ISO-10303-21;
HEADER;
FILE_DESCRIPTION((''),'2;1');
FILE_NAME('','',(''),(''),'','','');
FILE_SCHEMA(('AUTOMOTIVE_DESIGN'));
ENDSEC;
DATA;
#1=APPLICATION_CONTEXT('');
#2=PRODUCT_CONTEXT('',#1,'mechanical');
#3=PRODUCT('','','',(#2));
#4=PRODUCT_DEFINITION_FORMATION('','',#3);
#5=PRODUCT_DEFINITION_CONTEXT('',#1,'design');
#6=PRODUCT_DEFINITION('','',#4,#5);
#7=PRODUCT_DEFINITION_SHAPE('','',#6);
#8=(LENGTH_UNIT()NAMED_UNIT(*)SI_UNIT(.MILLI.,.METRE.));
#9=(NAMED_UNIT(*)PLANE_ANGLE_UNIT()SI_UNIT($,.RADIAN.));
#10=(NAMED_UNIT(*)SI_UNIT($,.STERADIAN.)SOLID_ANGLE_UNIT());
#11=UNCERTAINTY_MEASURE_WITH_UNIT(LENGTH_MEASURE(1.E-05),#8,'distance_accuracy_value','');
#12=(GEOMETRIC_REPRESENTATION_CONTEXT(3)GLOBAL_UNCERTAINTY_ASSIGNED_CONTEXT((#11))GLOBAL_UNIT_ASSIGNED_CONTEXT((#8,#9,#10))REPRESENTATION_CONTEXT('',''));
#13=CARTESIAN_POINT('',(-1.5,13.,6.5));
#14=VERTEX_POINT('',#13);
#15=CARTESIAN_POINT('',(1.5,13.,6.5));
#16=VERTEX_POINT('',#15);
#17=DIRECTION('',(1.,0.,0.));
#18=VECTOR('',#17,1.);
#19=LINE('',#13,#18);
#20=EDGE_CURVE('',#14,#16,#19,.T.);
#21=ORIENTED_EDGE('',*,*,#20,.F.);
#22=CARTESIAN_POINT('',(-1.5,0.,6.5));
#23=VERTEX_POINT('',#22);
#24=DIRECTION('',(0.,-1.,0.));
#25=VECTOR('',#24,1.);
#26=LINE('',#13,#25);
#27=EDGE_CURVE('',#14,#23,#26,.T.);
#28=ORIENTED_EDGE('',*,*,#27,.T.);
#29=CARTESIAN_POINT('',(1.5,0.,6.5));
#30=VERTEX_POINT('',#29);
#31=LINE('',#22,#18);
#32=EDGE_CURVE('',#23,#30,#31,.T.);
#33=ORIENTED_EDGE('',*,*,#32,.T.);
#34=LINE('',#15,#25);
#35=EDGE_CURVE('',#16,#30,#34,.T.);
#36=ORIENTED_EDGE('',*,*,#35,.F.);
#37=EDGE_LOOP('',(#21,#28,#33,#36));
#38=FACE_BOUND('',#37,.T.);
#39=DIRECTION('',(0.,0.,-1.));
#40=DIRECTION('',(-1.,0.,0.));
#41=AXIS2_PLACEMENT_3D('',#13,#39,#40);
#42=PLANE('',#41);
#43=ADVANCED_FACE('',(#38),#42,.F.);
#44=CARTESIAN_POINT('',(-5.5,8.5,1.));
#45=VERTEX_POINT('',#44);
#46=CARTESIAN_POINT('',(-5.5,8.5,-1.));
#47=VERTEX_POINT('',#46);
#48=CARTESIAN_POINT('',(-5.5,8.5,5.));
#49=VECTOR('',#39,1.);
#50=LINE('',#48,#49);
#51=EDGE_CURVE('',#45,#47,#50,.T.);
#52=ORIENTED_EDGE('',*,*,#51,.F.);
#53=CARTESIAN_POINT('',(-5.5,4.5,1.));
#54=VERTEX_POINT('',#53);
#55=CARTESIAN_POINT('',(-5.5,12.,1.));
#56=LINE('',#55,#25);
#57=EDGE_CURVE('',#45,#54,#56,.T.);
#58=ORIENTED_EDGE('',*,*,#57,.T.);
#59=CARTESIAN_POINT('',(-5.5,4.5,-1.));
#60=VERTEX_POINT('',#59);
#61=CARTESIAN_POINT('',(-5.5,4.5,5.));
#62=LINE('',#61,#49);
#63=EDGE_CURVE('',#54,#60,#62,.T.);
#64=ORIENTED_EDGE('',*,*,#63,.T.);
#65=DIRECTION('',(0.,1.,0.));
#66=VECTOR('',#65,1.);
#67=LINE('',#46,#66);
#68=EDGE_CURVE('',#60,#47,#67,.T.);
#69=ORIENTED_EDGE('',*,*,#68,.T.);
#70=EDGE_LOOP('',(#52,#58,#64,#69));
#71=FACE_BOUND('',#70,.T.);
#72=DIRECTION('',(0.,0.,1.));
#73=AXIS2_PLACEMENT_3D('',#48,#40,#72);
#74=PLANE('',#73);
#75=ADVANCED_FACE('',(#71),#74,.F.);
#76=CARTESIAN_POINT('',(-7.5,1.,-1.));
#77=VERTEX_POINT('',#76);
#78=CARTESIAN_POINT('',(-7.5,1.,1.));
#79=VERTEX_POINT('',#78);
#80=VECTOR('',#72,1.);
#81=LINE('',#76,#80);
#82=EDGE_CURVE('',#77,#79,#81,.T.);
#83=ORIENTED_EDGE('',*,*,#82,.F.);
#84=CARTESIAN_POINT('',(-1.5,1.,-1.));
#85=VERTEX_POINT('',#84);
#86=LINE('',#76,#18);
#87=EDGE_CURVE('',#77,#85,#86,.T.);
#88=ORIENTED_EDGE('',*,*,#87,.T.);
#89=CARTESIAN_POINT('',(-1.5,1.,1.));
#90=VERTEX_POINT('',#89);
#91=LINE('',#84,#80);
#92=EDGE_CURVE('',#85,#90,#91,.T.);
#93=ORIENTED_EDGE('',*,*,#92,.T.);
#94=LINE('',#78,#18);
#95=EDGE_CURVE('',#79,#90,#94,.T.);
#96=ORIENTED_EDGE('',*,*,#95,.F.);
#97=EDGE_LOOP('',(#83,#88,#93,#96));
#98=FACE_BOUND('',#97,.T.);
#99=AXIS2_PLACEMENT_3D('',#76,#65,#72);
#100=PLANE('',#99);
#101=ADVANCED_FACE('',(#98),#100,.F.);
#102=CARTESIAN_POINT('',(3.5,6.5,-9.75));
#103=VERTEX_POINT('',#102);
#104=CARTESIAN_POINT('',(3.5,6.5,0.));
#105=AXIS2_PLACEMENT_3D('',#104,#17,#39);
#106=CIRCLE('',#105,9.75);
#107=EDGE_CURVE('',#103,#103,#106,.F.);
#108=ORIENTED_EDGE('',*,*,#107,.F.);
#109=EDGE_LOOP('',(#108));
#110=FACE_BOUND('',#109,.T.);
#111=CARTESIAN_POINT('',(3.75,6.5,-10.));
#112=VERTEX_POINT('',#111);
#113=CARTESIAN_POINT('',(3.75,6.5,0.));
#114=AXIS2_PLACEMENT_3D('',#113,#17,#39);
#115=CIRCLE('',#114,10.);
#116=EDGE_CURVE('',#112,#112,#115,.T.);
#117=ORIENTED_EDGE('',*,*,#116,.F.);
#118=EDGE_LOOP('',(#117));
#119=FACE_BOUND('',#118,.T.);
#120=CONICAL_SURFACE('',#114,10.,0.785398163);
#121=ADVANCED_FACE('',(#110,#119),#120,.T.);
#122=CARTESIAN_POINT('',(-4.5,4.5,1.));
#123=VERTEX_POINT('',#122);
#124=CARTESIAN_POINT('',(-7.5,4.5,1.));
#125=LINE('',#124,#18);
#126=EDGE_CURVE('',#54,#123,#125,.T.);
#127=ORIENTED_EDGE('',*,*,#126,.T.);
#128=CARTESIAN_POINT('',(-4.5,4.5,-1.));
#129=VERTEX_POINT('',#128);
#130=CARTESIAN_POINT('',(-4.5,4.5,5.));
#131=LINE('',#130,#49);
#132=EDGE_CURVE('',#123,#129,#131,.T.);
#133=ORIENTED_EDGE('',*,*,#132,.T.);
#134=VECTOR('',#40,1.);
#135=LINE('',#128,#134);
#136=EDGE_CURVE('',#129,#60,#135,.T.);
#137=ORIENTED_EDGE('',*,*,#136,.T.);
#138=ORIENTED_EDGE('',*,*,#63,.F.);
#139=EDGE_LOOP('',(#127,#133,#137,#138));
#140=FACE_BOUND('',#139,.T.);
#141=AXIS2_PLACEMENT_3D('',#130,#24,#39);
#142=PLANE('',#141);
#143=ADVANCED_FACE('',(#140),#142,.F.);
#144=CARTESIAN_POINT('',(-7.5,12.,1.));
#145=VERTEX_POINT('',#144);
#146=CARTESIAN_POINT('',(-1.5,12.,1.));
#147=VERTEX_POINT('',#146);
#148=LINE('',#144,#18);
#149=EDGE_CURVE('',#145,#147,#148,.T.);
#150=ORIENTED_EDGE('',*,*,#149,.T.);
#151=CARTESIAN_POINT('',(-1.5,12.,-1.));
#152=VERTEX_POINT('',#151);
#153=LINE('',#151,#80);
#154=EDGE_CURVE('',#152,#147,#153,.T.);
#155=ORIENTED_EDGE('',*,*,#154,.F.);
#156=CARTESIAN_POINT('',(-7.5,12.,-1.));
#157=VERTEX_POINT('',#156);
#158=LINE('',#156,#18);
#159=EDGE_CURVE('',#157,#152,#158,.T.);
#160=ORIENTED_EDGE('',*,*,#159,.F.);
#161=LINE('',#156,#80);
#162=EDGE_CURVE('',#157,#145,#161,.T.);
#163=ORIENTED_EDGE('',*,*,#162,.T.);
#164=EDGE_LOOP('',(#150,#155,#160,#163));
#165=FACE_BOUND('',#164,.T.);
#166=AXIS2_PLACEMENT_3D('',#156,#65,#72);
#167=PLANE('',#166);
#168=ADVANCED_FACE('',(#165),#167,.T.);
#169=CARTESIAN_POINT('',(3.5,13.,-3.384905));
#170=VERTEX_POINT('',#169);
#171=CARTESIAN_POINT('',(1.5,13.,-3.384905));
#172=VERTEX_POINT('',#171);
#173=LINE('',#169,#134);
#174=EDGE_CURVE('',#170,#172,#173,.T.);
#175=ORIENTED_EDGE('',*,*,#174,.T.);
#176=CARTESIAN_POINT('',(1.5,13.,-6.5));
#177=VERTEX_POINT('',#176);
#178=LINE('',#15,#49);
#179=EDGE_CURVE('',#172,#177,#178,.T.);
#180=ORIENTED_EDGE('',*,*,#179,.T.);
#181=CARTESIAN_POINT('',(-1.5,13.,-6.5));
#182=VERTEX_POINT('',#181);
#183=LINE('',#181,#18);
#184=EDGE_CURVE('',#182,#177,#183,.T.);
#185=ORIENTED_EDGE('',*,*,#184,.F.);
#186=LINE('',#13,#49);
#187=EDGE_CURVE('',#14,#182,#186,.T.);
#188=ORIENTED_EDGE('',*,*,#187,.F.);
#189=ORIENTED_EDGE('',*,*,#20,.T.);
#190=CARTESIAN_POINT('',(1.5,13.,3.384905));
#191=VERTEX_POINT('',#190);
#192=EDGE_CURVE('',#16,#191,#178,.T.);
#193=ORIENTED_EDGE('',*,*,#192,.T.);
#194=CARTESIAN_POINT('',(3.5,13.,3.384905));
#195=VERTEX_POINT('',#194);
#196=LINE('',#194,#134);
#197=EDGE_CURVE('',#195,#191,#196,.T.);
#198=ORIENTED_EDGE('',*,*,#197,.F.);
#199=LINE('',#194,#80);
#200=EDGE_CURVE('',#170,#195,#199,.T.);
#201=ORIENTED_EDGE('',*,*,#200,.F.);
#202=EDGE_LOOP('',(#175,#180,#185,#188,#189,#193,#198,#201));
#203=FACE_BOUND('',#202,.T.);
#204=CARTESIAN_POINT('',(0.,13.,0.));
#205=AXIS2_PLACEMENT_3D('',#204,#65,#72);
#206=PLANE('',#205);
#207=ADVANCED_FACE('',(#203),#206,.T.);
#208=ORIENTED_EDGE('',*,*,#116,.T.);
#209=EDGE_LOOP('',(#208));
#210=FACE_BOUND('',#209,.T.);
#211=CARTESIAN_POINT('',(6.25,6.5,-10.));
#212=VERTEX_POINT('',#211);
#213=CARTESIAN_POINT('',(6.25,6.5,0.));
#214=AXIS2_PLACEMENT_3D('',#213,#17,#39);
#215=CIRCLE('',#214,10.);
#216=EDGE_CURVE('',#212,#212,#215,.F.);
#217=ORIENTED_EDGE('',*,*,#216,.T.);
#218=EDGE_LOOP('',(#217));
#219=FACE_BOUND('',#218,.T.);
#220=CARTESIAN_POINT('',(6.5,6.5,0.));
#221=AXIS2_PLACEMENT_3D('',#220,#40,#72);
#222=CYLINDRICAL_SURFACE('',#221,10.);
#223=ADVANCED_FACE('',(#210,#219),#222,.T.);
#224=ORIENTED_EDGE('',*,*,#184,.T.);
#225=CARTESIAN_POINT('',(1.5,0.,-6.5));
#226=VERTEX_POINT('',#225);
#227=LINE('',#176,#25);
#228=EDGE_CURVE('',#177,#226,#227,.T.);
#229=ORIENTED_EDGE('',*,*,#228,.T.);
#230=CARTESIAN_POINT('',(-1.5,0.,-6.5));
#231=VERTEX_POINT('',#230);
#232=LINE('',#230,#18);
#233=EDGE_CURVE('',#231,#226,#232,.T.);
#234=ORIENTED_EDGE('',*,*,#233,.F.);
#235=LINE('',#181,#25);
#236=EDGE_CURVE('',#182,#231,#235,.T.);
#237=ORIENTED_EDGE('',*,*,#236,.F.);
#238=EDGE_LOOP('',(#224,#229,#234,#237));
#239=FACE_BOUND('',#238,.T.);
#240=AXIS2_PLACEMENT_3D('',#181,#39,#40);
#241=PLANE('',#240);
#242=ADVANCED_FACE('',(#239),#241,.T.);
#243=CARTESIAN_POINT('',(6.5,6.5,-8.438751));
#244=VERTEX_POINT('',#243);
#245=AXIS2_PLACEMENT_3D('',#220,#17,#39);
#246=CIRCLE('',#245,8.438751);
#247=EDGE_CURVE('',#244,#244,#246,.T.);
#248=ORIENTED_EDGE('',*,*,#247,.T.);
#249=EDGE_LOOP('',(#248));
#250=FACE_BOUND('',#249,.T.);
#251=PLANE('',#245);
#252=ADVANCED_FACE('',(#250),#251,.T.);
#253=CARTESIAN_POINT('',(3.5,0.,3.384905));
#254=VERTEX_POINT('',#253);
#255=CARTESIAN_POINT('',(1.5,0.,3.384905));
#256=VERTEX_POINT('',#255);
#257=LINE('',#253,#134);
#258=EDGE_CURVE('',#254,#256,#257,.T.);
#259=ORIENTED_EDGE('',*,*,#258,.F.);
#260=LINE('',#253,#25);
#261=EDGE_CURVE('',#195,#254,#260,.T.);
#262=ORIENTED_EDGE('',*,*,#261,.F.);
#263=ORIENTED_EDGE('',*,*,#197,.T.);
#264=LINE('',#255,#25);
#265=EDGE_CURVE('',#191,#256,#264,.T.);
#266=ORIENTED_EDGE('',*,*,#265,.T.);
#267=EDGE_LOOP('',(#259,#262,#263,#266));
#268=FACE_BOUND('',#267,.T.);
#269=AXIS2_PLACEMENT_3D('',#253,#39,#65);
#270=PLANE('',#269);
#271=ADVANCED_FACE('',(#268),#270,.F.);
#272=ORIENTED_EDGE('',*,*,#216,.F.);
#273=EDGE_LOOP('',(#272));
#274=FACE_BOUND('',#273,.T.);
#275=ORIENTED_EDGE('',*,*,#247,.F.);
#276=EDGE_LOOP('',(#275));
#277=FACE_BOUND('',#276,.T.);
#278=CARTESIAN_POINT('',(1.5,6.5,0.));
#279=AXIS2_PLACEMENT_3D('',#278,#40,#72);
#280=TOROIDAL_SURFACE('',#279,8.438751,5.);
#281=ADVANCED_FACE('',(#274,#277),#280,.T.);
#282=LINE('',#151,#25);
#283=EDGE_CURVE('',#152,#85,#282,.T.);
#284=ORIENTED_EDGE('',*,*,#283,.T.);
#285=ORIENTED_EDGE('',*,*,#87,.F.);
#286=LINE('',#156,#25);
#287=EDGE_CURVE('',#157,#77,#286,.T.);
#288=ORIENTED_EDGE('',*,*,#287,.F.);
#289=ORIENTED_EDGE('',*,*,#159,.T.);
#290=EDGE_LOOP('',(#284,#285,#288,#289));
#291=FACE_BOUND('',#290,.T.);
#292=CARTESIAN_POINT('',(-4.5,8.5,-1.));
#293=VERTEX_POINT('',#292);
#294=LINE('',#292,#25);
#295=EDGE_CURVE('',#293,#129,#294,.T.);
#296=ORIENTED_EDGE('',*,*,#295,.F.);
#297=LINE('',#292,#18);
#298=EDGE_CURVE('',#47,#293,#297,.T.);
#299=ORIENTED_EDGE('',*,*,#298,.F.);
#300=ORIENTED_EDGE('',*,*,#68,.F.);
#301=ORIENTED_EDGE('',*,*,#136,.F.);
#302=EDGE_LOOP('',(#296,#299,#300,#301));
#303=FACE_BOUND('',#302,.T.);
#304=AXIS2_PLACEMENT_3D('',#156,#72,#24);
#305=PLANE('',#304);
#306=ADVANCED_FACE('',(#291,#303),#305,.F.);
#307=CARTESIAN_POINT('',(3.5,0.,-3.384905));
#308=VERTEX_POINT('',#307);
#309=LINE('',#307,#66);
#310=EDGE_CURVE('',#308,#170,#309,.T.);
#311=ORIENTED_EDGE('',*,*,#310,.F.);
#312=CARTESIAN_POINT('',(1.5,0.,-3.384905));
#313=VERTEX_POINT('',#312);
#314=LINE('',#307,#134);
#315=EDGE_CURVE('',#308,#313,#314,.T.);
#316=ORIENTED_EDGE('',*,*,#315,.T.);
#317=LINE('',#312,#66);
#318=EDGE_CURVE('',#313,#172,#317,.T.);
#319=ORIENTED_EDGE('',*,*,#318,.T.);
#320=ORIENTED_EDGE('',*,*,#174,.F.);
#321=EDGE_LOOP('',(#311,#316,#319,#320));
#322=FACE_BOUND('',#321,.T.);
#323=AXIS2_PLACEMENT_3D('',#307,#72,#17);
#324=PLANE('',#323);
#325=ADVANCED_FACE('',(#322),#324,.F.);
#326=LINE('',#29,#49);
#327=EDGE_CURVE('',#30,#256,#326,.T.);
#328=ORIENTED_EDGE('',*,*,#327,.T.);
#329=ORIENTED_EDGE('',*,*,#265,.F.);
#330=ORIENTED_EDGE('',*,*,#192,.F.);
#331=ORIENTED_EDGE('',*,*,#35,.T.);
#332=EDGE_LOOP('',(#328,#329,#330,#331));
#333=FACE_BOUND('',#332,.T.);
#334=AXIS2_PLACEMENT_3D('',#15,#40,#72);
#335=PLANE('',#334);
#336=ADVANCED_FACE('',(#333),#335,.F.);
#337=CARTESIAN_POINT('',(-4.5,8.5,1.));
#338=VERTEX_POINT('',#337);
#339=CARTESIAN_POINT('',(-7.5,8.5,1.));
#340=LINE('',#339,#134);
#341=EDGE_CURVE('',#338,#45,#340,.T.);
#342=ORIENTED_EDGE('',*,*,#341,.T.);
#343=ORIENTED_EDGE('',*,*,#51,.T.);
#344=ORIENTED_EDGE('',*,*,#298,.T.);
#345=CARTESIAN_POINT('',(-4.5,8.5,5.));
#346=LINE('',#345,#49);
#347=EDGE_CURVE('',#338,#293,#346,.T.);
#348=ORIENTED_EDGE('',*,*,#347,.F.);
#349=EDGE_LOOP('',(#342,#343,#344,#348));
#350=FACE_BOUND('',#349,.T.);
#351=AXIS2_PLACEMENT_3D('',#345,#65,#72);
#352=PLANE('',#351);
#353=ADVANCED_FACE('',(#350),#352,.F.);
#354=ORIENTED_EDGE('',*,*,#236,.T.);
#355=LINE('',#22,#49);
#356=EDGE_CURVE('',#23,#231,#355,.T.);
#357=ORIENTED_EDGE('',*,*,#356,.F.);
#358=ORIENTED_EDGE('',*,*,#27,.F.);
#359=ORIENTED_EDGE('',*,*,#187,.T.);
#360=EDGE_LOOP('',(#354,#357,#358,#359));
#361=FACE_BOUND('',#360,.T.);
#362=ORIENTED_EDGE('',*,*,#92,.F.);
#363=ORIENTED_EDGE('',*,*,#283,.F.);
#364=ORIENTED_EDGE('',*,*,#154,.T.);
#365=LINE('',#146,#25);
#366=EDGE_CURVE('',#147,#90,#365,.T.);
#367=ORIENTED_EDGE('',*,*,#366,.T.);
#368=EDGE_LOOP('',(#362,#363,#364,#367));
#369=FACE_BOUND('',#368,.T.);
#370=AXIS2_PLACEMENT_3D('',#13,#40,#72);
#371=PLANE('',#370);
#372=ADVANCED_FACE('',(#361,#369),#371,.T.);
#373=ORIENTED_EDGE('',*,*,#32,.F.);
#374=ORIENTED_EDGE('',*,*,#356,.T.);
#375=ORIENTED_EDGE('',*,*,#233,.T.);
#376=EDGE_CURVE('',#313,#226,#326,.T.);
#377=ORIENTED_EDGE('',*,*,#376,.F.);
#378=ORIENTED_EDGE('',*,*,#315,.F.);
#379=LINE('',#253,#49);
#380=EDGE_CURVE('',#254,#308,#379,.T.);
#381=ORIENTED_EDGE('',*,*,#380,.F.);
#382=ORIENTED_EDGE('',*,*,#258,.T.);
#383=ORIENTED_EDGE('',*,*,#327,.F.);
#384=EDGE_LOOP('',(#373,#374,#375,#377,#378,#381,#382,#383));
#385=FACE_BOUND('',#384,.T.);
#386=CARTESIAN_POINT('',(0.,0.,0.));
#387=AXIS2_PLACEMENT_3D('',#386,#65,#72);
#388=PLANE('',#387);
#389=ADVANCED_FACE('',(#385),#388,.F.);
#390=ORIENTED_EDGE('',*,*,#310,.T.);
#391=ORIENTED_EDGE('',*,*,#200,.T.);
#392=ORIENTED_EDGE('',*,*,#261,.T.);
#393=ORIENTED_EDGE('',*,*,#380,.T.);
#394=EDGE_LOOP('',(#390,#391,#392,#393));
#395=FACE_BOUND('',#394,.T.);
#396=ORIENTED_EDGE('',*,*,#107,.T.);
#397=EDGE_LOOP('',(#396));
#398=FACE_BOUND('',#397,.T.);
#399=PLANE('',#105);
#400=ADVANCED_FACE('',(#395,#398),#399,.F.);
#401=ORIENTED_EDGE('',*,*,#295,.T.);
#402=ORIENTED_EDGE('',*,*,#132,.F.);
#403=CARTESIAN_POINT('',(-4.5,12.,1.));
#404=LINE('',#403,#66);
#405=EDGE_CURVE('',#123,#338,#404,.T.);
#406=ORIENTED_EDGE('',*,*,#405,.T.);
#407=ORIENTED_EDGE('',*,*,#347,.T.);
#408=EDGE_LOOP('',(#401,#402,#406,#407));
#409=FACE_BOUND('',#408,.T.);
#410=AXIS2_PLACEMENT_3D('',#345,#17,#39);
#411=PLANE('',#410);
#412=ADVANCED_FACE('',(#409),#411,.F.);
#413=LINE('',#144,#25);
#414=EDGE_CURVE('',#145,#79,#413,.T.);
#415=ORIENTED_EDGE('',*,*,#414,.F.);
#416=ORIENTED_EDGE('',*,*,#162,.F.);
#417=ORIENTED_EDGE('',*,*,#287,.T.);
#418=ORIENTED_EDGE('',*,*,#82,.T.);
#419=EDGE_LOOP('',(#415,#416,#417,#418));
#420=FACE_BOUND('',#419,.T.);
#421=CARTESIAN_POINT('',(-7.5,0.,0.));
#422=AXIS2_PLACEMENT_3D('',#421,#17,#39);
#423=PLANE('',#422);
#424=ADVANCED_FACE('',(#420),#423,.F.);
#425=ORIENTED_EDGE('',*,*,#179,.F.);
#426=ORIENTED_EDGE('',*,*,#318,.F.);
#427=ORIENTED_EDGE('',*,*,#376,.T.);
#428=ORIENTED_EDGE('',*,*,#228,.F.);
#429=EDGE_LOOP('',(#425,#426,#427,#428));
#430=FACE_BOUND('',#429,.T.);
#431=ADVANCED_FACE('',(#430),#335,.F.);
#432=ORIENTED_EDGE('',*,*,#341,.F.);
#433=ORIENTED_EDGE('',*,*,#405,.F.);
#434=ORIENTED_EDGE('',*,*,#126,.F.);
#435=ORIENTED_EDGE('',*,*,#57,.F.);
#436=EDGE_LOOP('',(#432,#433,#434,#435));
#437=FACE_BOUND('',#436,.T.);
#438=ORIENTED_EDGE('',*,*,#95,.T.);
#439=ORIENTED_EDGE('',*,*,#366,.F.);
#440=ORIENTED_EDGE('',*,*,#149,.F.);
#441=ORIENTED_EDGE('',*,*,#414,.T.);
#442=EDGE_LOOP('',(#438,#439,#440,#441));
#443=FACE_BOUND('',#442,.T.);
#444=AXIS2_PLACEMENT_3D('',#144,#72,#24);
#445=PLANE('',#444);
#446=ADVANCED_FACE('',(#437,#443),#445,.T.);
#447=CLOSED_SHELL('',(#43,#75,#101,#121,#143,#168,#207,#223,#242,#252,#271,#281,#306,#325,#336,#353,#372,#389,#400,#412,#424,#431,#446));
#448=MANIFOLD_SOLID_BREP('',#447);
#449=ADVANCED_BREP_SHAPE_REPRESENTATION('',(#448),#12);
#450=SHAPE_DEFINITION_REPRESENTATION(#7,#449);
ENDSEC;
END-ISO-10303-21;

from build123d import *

# Parameters (mm, degrees)
SZKIC1_W                    = 3
SZKIC1_H                    = 13
DODANIE_WYCI_GNI_CIE2_DEPTH = 13
SZKIC3_W                    = 6.769810996
SZKIC3_H                    = 13
DODANIE_WYCI_GNI_CIE3_DEPTH = 2
SZKIC4_R                    = 10
DODANIE_WYCI_GNI_CIE4_DEPTH = 3
SFAZOWANIE1_SIZE            = 0.25
SFAZOWANIE2_SIZE            = 0.25
ZAOKR_GLENIE2_R             = 5
SZKIC5_W                    = 2
SZKIC5_H                    = 11
DODANIE_WYCI_GNI_CIE5_DEPTH = 6
SZKIC8_W                    = 1
SZKIC8_H                    = 4
WYTNIJ_WYCI_GNI_CIE1_DEPTH  = 6


with BuildPart() as part:
    # Szkic1 → Dodanie-wyciągnięcie2 (new body)
    with BuildSketch(Plane(origin=(0, 0, 0), x_dir=(1, 0, 0), z_dir=(0, 1, 0))):
        Rectangle(SZKIC1_W, SZKIC1_H)
    extrude(amount=DODANIE_WYCI_GNI_CIE2_DEPTH)

    # Szkic3 → Dodanie-wyciągnięcie3 (add)
    with BuildSketch(Plane(origin=(1.5, 0, 0), x_dir=(0, 0, -1), z_dir=(1, 0, 0))):
        with Locations((0, 6.5)):
            Rectangle(SZKIC3_W, SZKIC3_H)
    extrude(amount=DODANIE_WYCI_GNI_CIE3_DEPTH)

    # Szkic4 → Dodanie-wyciągnięcie4 (add)
    with BuildSketch(Plane(origin=(3.5, 0, 0), x_dir=(0, 0, -1), z_dir=(1, 0, 0))):
        with Locations((0, 6.5)):
            Circle(SZKIC4_R)
    extrude(amount=DODANIE_WYCI_GNI_CIE4_DEPTH)

    # Sfazowanie1
    sfazowanie1_edges = [part.edges().sort_by_distance(p)[0] for p in [
        (6.5, 6.5, 10),
    ]]
    chamfer(sfazowanie1_edges, length=SFAZOWANIE1_SIZE)

    # Sfazowanie2
    sfazowanie2_edges = [part.edges().sort_by_distance(p)[0] for p in [
        (3.5, 6.5, 10),
    ]]
    chamfer(sfazowanie2_edges, length=SFAZOWANIE2_SIZE)

    # Zaokrąglenie2
    # the kernel refuses this fillet: 5 mm, written as the material it takes off along each edge
    with BuildSketch(Plane(origin=(6.5, 6.5, 0), x_dir=(0, 0, -1), z_dir=(0, -1, 0))) as zaokr_glenie2_piece_1:
        with BuildLine():
            CenterArc((8.4387505, -5), ZAOKR_GLENIE2_R, 71.805127661, 18.194872339)
            Line((8.4387505, 0), (8.4387505, 0.1))
            Line((8.4387505, 0.1), (9.75, 0.1))
            Line((9.75, 0.1), (9.820710678, 0.070710678))
            ThreePointArc((9.820710678, 0.070710678), (9.945710678, -0.054289322), (10.03122499, -0.155))
            Line((10.03122499, -0.155), (10, -0.25))
        make_face()
    revolve(axis=Axis((6.5, 6.5, 0), (1, 0, 0)), mode=Mode.SUBTRACT)

    # Szkic5 → Dodanie-wyciągnięcie5 (add)
    with BuildSketch(Plane.ZY.offset(1.5)):
        with Locations((0, 6.5)):
            Rectangle(SZKIC5_W, SZKIC5_H)
    extrude(amount=DODANIE_WYCI_GNI_CIE5_DEPTH)

    # Szkic8 → Wytnij-wyciągnięcie1 (cut)
    with BuildSketch(Plane(origin=(0, 0, -1), x_dir=(-1, 0, 0), z_dir=(0, 0, -1))):
        with Locations((5, 6.5)):
            Rectangle(SZKIC8_W, SZKIC8_H)
    extrude(amount=-WYTNIJ_WYCI_GNI_CIE1_DEPTH, mode=Mode.SUBTRACT)


solid = part.part
